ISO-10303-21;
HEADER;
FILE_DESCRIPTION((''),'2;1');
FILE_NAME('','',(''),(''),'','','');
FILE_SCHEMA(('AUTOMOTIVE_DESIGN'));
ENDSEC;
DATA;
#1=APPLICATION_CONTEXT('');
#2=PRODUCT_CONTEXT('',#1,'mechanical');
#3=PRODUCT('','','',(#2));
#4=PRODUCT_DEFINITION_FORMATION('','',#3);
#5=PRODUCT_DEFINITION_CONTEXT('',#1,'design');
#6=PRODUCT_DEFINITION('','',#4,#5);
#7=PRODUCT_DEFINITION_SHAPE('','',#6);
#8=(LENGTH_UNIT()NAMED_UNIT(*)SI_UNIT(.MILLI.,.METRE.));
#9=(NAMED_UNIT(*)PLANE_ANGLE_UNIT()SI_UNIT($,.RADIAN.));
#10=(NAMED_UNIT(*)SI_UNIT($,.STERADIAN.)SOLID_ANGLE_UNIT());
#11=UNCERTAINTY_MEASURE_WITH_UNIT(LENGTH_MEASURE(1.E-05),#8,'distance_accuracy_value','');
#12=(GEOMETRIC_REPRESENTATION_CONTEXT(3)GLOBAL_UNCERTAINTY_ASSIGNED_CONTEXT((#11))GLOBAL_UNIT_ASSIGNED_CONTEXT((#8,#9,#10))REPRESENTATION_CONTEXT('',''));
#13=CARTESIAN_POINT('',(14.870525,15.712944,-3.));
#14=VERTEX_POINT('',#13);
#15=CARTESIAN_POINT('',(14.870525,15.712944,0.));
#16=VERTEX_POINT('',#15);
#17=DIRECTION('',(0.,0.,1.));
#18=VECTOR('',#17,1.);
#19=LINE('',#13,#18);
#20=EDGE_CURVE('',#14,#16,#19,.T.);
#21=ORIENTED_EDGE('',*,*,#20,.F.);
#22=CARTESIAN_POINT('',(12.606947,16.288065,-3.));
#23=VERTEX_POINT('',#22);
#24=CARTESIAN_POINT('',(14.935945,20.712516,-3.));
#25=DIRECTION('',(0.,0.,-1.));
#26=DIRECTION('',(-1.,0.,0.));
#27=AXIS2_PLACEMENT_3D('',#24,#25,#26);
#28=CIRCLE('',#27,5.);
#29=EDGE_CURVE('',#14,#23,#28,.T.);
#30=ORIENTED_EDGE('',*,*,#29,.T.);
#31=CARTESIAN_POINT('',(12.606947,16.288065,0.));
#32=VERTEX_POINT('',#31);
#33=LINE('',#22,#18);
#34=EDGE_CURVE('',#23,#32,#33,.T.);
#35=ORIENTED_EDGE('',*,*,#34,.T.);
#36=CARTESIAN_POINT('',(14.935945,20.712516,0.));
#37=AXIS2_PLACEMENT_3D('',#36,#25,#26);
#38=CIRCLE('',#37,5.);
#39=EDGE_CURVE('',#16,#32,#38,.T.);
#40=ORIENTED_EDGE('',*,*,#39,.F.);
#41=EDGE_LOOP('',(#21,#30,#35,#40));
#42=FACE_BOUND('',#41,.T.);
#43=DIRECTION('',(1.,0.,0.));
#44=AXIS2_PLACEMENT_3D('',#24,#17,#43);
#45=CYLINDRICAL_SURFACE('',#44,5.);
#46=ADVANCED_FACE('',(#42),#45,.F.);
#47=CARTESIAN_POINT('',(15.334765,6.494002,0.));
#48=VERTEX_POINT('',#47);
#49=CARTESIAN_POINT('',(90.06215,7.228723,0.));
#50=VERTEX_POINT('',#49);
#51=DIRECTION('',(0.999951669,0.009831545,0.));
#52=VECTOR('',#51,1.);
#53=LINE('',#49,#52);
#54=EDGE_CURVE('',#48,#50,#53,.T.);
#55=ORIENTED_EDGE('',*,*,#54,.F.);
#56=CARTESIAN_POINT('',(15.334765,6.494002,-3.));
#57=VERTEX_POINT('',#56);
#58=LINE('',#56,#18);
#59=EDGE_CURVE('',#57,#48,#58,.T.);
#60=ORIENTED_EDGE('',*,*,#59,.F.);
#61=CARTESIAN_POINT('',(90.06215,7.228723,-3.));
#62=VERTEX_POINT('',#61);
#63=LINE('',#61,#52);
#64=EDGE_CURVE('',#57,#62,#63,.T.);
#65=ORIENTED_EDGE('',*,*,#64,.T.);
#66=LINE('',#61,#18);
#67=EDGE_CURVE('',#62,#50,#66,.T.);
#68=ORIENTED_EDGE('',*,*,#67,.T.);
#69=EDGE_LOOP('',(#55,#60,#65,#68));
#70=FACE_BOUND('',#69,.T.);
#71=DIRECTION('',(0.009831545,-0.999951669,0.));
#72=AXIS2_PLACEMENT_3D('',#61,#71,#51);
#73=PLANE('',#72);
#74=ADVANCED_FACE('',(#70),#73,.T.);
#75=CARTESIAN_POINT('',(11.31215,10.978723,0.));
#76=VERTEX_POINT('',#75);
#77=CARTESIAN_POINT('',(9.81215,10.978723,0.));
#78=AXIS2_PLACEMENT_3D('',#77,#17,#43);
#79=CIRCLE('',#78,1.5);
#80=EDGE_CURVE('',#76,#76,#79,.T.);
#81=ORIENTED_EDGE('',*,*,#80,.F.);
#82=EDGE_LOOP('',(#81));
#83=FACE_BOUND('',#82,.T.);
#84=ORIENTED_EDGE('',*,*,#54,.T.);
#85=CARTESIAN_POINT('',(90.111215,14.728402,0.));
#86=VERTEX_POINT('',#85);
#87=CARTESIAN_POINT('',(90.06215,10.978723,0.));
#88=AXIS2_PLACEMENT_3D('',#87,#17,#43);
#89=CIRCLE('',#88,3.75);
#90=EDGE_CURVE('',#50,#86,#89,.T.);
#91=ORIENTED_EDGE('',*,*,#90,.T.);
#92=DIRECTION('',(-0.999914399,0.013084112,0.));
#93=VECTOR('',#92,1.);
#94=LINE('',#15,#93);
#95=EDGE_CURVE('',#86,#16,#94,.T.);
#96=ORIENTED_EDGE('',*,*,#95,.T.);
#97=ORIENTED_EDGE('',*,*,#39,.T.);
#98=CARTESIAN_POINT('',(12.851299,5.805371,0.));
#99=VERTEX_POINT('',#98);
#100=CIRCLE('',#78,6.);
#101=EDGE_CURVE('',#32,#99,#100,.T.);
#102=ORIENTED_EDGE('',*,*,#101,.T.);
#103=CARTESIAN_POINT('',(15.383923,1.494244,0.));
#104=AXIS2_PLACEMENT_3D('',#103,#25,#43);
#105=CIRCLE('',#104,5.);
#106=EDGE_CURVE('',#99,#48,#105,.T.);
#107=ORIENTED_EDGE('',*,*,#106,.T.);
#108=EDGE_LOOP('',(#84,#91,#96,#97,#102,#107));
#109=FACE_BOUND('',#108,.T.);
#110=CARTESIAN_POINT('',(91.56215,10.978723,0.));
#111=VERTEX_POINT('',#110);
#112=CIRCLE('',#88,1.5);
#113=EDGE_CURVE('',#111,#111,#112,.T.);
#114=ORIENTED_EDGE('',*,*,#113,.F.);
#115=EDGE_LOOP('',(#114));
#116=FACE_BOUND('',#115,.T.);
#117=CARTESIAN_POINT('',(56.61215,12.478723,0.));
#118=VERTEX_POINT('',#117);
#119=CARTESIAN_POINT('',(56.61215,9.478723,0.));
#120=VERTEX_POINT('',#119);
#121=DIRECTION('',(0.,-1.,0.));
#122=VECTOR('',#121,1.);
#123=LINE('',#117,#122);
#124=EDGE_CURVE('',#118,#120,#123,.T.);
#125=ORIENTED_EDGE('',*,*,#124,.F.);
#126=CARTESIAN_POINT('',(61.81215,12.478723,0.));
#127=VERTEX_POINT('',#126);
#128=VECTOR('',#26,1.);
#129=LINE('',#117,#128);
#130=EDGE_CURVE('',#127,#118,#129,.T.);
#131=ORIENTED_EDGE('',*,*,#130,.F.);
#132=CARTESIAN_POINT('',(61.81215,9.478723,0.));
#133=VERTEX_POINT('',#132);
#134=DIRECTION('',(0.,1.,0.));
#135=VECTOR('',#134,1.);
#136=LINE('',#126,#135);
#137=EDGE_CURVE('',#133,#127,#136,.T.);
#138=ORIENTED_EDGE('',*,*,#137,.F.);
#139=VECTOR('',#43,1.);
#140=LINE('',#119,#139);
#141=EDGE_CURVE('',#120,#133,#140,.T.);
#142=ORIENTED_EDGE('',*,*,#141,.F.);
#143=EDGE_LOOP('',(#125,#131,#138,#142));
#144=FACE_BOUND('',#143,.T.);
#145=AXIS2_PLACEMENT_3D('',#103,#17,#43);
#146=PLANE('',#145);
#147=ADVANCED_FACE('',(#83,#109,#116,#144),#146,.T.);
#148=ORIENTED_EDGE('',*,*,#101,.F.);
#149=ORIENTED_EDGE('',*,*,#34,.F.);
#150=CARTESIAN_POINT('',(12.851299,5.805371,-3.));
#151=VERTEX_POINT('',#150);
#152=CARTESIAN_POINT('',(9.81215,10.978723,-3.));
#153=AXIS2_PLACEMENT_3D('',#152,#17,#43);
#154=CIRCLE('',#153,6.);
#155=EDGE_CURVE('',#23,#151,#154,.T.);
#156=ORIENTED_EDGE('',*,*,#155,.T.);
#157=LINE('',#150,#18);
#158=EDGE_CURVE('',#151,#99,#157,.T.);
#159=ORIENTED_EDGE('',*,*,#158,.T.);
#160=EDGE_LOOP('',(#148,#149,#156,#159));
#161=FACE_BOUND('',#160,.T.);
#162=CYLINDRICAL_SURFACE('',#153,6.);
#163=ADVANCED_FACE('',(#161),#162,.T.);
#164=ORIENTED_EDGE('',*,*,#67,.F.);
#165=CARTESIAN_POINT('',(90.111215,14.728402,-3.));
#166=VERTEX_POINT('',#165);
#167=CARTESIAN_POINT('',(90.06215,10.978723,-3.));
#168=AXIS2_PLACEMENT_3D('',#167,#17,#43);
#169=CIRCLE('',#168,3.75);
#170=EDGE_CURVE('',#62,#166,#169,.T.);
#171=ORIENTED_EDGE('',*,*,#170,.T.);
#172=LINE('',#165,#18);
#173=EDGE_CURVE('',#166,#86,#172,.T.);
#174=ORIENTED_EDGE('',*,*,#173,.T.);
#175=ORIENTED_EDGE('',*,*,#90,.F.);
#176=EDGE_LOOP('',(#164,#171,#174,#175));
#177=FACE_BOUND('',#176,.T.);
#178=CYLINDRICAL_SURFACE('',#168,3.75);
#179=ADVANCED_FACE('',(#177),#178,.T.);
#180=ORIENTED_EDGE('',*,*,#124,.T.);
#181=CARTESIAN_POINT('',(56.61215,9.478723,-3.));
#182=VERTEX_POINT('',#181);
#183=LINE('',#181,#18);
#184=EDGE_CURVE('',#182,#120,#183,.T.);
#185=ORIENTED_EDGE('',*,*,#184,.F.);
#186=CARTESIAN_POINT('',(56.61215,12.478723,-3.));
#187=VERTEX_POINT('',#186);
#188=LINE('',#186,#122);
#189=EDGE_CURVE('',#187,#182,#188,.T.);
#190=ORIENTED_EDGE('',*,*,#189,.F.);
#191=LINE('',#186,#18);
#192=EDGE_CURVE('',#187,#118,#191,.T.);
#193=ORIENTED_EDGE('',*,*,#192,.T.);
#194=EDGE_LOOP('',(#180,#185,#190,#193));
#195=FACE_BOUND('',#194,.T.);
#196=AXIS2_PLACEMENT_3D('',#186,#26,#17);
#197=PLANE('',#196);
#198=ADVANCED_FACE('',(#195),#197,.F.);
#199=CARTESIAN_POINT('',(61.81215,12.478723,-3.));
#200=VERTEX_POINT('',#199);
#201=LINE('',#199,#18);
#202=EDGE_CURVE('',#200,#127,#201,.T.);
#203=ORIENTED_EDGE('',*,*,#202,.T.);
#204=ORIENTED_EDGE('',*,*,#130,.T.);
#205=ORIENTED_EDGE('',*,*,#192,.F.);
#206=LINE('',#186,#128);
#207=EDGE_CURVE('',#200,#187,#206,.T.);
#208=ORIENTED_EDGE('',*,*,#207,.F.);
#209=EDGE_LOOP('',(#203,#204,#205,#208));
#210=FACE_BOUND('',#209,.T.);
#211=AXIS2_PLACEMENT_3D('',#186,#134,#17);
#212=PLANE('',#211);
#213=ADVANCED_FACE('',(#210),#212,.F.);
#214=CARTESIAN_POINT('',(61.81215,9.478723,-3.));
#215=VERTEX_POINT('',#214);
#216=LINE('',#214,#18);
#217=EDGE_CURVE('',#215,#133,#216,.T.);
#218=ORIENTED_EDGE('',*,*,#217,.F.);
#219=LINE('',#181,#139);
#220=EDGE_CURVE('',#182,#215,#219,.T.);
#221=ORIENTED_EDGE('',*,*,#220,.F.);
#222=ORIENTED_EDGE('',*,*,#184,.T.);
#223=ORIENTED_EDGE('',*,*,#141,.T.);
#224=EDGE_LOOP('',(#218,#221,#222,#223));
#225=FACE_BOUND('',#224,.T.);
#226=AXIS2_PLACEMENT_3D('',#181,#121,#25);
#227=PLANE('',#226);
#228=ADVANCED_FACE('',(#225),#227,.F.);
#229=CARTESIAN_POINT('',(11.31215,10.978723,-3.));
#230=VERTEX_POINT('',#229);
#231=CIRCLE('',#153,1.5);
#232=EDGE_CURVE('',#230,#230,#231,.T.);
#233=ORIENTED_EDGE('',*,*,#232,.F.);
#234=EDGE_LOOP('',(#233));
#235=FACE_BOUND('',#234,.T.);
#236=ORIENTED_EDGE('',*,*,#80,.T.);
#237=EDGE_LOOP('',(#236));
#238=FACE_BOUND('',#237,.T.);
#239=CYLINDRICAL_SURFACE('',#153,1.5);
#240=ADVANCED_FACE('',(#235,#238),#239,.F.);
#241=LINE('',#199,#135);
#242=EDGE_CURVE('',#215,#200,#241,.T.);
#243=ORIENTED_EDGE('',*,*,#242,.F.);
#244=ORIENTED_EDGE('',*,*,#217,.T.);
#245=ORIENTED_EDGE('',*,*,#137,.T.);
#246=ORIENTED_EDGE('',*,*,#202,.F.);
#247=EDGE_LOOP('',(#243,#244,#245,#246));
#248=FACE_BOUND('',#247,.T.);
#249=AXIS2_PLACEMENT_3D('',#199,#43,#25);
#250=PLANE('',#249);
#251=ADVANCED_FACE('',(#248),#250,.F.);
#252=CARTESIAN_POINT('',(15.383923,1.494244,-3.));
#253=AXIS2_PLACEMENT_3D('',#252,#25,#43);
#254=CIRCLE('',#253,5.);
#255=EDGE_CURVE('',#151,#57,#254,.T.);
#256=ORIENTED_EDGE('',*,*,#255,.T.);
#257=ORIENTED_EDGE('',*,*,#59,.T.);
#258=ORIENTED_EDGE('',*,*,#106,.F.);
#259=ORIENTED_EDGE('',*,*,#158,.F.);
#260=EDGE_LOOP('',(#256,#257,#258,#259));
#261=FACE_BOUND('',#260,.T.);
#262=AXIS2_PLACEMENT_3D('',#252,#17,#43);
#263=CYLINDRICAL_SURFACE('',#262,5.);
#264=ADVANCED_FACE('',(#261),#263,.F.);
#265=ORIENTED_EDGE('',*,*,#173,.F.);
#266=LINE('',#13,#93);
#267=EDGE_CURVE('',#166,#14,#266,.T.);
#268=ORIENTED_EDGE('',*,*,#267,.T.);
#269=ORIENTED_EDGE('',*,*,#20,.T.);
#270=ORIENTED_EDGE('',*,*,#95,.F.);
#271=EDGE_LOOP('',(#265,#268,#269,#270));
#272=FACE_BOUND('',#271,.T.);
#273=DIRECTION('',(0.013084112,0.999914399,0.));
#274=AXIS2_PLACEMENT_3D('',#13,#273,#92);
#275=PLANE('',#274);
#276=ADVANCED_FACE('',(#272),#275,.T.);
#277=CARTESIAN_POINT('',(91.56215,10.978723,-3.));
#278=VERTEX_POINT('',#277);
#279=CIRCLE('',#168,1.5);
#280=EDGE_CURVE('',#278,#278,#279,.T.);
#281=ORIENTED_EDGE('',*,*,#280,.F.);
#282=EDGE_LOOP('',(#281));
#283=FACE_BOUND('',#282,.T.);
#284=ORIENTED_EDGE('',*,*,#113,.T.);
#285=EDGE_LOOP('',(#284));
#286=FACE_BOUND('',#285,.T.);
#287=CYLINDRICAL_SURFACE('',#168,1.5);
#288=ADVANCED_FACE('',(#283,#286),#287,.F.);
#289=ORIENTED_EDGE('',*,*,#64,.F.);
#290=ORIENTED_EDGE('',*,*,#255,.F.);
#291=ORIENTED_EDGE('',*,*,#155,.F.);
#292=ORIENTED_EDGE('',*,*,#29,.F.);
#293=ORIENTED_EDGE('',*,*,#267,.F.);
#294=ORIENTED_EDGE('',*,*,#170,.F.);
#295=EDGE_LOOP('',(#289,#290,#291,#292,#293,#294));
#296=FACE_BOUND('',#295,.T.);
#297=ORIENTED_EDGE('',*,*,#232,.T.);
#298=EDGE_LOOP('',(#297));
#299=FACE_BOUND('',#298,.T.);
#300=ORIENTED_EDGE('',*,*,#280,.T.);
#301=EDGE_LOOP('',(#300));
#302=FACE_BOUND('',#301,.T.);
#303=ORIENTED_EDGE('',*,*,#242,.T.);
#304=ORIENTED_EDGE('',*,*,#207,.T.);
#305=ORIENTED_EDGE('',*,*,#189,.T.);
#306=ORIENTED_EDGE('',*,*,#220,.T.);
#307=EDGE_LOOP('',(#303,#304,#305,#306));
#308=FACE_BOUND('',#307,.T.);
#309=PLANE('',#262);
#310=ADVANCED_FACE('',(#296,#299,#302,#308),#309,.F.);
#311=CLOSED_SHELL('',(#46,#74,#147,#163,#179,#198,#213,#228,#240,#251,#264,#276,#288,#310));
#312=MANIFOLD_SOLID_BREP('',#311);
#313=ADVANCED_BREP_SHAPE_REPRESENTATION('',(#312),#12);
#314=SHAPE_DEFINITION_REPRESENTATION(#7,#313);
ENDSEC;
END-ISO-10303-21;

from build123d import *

# Parameters (mm, degrees)
ESQUISSE1_R               = 1.5
ESQUISSE1_W               = 5.2
ESQUISSE1_H               = 3
T_LE_DE_BASE_PLI_E1_DEPTH = 3


# Sheet-metal steps are written as plain solids
with BuildPart() as part:
    # Esquisse1 → Tôle de base pliée1 (new body)
    with BuildSketch(Plane.XY):
        with BuildLine():
            Line((14.870524532, 15.712944318), (90.111215477, 14.728402402))
            ThreePointArc((90.111215477, 14.728402402), (93.812069805, 10.954190169), (90.062150056, 7.228723404))
            Line((90.062150056, 7.228723404), (15.334764804, 6.494002243))
            ThreePointArc((15.334764804, 6.494002243), (14.047901461, 6.312443531), (12.851298677, 5.805370946))
            ThreePointArc((12.851298677, 5.805370946), (3.813779457, 10.83890154), (12.606947349, 16.288064992))
            ThreePointArc((12.606947349, 16.288064992), (13.70468529, 15.866487084), (14.870524532, 15.712944318))
        make_face()
        with Locations((9.812150056, 10.978723404)):
            Circle(ESQUISSE1_R, mode=Mode.SUBTRACT)
        with Locations((90.062150056, 10.978723404)):
            Circle(ESQUISSE1_R, mode=Mode.SUBTRACT)
        with Locations((59.212150056, 10.978723404)):
            Rectangle(ESQUISSE1_W, ESQUISSE1_H, mode=Mode.SUBTRACT)
    extrude(amount=-T_LE_DE_BASE_PLI_E1_DEPTH)


solid = part.part
